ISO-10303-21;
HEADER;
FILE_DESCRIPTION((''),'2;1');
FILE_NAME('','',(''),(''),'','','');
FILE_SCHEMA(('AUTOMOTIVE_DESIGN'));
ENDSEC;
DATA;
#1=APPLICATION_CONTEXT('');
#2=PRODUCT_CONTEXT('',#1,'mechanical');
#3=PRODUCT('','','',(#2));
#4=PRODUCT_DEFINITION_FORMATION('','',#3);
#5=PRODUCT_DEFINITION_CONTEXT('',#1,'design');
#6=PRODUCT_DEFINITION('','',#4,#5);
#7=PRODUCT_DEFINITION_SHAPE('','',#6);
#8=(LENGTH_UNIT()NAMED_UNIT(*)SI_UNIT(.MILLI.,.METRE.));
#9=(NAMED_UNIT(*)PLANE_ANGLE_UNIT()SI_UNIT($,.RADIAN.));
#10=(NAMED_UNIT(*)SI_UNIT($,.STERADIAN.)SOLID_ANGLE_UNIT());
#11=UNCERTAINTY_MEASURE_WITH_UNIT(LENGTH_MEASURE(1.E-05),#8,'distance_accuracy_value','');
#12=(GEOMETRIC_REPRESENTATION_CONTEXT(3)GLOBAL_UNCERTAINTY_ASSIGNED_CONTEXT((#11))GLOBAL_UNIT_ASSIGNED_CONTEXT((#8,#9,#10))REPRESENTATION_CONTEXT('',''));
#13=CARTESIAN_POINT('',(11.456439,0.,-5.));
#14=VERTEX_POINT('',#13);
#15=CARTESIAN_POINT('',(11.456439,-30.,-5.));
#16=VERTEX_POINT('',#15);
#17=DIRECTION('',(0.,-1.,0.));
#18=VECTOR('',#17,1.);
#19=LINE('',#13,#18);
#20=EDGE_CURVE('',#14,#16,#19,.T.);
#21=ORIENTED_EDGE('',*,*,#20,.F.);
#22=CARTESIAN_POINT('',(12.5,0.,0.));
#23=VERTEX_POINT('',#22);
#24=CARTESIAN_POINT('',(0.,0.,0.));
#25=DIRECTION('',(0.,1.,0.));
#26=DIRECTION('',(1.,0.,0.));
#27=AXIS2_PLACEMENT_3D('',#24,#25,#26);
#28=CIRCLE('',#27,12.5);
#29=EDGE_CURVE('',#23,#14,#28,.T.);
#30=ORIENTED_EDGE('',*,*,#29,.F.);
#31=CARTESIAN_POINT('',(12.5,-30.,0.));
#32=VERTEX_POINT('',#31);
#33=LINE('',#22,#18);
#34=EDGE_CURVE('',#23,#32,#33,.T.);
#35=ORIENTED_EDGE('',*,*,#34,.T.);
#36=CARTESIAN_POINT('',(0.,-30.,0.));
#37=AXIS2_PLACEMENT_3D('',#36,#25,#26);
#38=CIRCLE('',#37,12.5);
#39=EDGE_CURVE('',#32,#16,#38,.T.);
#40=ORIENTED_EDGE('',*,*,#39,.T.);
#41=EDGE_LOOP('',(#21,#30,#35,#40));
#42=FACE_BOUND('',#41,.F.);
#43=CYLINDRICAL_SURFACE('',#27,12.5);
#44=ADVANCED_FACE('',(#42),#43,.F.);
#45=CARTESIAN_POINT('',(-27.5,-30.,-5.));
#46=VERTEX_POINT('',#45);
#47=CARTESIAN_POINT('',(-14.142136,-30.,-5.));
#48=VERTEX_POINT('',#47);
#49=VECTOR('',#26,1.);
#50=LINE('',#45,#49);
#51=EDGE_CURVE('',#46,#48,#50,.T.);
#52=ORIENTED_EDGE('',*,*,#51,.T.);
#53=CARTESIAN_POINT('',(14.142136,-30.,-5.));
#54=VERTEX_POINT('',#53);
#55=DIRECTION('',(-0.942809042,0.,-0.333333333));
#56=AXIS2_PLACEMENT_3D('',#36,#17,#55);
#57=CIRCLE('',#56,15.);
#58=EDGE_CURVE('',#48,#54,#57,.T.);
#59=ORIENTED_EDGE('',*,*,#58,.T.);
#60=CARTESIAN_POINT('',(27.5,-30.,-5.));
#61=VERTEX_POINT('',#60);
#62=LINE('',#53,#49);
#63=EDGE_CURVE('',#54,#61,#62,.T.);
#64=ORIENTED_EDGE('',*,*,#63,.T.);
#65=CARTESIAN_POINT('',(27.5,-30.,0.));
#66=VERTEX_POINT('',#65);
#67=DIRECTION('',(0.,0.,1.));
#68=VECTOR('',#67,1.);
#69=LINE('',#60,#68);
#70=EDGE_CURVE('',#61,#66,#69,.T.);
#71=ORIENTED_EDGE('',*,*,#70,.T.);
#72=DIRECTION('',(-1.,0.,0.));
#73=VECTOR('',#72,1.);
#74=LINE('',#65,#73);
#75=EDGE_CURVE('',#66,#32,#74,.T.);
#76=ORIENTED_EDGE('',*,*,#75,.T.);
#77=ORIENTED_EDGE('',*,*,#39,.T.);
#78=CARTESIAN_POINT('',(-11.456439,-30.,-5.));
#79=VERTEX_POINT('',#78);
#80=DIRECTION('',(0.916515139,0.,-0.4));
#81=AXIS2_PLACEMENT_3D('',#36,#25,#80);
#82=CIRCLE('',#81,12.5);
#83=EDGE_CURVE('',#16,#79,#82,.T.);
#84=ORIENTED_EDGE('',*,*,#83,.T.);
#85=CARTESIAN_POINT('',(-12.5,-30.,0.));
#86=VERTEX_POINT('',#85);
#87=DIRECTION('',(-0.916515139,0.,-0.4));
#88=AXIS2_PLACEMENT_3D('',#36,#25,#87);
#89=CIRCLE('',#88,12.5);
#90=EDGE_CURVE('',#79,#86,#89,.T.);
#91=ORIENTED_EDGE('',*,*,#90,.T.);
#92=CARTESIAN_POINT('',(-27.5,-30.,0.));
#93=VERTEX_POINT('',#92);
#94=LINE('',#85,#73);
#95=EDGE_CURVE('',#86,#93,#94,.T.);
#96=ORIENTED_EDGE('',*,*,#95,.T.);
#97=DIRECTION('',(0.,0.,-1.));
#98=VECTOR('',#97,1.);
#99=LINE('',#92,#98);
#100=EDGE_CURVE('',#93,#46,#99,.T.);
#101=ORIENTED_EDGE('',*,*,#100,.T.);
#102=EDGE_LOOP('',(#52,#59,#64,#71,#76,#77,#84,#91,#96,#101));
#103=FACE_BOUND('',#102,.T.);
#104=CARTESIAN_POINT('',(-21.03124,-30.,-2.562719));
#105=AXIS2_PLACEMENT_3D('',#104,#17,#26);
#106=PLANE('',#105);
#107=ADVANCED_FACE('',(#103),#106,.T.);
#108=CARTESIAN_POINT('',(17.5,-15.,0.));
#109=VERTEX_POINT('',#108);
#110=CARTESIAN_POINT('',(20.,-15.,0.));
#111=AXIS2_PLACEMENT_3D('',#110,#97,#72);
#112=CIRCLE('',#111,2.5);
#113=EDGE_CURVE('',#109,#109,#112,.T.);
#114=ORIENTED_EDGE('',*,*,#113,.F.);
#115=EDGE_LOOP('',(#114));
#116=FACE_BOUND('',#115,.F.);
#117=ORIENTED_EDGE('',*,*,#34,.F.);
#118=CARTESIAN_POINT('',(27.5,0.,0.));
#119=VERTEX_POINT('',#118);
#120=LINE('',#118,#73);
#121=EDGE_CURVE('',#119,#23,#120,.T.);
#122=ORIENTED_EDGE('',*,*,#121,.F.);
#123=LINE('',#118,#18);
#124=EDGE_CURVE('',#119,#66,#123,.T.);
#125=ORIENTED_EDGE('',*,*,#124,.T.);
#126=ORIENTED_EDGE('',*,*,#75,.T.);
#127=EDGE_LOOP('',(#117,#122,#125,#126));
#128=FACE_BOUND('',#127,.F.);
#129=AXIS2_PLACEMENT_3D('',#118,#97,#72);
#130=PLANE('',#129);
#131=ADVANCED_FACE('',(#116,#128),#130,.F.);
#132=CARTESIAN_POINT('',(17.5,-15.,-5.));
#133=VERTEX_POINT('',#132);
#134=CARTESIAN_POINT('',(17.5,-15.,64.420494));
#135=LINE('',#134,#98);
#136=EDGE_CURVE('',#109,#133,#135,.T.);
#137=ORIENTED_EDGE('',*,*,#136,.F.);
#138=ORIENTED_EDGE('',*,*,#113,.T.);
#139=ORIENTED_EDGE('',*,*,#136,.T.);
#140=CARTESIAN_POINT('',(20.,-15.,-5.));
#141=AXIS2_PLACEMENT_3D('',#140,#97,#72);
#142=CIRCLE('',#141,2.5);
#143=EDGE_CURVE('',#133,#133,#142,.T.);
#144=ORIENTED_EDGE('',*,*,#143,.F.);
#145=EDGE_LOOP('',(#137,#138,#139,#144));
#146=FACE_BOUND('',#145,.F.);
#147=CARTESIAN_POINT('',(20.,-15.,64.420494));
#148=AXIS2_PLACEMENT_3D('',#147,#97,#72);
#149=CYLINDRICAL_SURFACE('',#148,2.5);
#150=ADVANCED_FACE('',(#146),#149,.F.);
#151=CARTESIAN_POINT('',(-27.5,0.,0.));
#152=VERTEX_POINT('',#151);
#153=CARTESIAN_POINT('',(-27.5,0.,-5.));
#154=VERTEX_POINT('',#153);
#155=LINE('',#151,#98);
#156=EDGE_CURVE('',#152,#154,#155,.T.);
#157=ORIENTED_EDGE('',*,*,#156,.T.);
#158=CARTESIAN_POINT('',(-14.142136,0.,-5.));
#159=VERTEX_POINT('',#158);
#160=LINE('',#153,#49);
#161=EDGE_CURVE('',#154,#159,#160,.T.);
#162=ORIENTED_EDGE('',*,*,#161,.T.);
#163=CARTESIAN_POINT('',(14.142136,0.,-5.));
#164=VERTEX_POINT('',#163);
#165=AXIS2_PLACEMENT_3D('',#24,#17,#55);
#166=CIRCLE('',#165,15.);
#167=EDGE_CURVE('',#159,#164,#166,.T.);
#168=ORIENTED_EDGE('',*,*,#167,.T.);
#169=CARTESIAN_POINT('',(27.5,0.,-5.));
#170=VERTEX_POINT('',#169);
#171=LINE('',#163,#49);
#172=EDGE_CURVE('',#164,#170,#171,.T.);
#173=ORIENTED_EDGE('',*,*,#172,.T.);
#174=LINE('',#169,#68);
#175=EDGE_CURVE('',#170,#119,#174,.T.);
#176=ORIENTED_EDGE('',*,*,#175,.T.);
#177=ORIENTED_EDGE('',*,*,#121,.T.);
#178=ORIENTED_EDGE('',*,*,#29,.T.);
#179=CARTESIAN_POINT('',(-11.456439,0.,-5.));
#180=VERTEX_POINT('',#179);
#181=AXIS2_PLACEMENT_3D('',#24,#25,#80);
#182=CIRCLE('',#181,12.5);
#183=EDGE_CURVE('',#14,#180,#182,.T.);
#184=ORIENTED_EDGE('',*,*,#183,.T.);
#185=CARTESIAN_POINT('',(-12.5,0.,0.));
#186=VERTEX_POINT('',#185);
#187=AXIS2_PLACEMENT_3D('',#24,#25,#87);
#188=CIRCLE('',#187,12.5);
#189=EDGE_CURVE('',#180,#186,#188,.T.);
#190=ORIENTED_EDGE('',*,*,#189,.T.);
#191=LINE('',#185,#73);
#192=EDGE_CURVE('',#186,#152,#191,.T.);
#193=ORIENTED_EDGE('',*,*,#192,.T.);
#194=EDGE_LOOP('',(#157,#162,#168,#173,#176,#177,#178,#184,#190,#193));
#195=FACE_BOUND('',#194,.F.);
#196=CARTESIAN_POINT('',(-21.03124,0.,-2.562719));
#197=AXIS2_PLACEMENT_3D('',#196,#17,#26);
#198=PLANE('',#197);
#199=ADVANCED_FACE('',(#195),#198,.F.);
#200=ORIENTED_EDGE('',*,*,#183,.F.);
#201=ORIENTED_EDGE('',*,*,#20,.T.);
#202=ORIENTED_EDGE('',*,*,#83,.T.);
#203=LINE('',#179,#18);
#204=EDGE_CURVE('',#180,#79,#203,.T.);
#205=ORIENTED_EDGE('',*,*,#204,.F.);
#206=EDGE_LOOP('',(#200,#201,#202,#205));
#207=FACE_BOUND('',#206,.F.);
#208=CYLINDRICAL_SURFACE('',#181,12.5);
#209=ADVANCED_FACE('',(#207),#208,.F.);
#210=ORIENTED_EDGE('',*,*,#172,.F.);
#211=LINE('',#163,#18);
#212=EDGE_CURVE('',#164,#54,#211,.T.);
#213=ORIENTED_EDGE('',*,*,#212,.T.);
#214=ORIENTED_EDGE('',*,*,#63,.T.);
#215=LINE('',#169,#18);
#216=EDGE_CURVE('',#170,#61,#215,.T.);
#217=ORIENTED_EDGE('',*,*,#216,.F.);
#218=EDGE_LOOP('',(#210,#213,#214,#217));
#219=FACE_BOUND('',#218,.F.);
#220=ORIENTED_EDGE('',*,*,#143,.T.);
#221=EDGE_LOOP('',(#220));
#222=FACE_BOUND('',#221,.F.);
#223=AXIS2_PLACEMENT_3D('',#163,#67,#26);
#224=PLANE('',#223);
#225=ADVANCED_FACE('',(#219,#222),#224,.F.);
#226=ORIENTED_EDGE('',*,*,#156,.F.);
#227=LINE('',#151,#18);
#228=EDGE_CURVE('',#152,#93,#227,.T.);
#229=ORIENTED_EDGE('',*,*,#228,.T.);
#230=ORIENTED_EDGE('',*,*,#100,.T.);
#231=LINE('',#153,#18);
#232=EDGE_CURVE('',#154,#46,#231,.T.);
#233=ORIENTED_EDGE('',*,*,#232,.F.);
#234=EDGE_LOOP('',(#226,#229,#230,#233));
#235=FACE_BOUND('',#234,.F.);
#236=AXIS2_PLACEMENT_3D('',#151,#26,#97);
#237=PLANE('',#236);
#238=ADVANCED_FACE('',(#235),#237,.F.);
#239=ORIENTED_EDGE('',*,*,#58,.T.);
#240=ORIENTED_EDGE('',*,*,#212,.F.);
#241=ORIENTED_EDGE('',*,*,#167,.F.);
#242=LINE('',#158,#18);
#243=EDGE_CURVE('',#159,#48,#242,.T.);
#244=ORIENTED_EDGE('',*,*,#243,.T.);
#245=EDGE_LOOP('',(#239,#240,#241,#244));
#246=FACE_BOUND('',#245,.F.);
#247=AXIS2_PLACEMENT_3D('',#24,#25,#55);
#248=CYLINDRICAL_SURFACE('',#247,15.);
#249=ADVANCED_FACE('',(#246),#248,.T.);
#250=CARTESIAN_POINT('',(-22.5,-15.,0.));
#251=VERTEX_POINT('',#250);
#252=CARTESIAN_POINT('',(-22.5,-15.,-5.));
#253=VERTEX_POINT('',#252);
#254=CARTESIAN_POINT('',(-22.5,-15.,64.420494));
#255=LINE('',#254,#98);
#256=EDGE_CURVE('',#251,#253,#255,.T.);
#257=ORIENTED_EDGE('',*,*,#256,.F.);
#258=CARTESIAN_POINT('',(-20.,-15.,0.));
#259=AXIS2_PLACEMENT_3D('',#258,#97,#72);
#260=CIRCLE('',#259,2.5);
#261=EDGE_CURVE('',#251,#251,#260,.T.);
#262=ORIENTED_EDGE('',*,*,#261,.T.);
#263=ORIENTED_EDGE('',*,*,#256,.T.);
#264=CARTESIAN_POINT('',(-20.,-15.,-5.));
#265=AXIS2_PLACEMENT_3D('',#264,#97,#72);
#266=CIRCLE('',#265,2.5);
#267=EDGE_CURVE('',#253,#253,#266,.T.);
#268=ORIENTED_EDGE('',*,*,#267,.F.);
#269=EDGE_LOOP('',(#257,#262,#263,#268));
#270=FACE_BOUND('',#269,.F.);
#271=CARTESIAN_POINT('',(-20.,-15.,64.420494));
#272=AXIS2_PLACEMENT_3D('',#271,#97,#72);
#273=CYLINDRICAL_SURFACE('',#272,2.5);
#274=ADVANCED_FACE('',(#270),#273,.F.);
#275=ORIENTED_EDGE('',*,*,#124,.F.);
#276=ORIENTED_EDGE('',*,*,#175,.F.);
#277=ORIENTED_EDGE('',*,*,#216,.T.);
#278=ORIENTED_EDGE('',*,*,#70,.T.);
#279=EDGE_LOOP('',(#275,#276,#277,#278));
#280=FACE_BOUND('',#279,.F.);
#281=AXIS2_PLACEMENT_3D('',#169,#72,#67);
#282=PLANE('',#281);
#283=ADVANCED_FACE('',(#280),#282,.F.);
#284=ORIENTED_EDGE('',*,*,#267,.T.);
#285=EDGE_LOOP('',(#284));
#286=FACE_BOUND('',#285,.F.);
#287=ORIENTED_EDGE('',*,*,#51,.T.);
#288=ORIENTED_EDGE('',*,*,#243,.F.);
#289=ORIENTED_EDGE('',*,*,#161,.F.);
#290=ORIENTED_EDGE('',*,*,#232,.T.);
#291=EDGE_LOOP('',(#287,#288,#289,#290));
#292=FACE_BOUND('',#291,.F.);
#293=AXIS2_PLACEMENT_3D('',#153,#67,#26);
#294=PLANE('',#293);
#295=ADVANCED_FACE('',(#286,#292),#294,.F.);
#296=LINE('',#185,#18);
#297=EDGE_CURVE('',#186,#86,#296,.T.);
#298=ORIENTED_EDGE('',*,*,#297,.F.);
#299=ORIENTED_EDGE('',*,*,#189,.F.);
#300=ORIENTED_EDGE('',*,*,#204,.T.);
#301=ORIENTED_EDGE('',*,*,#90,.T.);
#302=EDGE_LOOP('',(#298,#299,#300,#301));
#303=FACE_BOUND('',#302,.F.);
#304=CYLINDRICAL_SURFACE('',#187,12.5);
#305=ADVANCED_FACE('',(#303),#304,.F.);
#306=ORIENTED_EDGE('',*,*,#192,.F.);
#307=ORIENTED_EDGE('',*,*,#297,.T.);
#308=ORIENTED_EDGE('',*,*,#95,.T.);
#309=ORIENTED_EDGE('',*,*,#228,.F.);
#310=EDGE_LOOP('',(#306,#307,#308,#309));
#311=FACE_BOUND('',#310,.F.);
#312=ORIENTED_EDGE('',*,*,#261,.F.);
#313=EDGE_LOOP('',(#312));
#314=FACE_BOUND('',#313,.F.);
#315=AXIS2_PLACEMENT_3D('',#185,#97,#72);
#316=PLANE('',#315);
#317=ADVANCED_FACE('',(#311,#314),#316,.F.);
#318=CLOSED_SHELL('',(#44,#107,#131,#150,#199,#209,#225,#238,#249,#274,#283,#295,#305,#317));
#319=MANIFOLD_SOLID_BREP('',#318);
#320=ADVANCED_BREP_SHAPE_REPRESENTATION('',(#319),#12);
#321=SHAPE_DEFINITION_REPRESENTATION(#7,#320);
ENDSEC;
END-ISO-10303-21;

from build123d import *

# Parameters (mm, degrees)
F1_DEPTH = 30
F3_D     = 5


with BuildPart() as f1:
    # F0 (on Front) → F1 (new body)
    with BuildSketch(Plane.XZ):
        with BuildLine():
            ThreePointArc((-14.1421356237, -5), (-14.7839783948, -2.5365296809), (-15, 0))
            Line((-15, 0), (-27.5, 0))
            Line((-27.5, 0), (-27.5, -5))
            Line((-27.5, -5), (-14.1421356237, -5))
        make_face()
        with BuildLine():
            ThreePointArc((-11.4564392374, -5), (-12.2363289116, -2.5538705461), (-12.5, 0))
            Line((-12.5, 0), (-15, 0))
            ThreePointArc((-15, 0), (-14.7839783948, -2.5365296809), (-14.1421356237, -5))
            Line((-14.1421356237, -5), (-11.4564392374, -5))
        make_face()
        with BuildLine():
            ThreePointArc((11.4564392374, -5), (0, -12.5), (-11.4564392374, -5))
            Line((-11.4564392374, -5), (-14.1421356237, -5))
            ThreePointArc((-14.1421356237, -5), (0, -15), (14.1421356237, -5))
            Line((14.1421356237, -5), (11.4564392374, -5))
        make_face()
        with BuildLine():
            ThreePointArc((12.5, 0), (12.2363289116, -2.5538705461), (11.4564392374, -5))
            Line((11.4564392374, -5), (14.1421356237, -5))
            ThreePointArc((14.1421356237, -5), (14.7839783948, -2.5365296809), (15, 0))
            Line((15, 0), (12.5, 0))
        make_face()
        with BuildLine():
            ThreePointArc((15, 0), (14.7839783948, -2.5365296809), (14.1421356237, -5))
            Line((14.1421356237, -5), (27.5, -5))
            Line((27.5, -5), (27.5, 0))
            Line((27.5, 0), (15, 0))
        make_face()
    extrude(amount=F1_DEPTH)

    # F3 (through all)
    with Locations(Plane.XY):
        with Locations((-20, -15), (20, -15)):
            Hole(F3_D / 2)


solid = f1.part
